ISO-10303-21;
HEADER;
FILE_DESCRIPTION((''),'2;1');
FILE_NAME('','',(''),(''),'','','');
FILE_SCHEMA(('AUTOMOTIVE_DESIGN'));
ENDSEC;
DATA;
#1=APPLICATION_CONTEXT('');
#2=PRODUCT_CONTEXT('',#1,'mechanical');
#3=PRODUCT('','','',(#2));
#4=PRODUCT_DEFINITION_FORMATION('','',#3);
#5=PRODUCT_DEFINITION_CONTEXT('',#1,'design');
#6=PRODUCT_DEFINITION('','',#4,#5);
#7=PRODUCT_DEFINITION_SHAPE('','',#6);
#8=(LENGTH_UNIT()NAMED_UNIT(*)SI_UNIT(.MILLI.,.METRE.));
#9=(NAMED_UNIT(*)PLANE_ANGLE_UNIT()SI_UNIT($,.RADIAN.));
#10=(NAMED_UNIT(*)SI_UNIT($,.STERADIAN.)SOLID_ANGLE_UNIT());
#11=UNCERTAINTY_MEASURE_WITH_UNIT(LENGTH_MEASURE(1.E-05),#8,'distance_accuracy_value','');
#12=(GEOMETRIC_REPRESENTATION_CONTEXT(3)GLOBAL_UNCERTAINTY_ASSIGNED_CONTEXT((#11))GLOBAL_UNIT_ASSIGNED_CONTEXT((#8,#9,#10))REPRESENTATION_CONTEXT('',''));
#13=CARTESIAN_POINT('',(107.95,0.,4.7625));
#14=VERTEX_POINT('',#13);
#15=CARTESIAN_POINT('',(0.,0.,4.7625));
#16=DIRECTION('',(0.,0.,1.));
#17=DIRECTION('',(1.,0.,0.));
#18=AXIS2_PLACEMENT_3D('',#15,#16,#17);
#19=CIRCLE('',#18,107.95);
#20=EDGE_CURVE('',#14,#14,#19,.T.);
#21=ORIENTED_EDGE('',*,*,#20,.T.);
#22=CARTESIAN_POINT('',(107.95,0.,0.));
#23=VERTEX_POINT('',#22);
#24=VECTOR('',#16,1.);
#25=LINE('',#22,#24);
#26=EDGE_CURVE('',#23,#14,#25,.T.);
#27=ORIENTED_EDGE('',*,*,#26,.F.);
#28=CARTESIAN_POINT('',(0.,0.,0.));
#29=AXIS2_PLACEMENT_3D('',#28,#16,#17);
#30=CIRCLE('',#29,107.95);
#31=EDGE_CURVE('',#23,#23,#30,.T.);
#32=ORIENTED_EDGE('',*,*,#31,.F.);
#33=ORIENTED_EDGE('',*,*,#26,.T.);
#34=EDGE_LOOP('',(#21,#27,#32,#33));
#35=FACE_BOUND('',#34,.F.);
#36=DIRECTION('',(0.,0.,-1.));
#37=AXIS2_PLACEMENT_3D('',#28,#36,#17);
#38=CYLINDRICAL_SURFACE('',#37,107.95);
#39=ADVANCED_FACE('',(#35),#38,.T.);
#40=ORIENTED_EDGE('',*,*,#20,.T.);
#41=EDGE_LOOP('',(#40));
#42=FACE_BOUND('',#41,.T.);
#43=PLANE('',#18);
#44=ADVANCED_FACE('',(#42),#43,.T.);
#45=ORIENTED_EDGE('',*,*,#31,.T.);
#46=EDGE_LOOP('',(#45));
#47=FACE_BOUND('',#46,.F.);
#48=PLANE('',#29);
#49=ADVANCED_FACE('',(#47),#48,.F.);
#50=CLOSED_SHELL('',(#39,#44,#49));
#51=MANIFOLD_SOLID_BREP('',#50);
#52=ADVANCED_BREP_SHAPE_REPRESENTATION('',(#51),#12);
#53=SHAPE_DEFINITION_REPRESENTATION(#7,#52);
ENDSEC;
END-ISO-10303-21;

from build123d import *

# Parameters (mm, degrees)
F0_R     = 107.95
F1_DEPTH = 4.7625


# Not quite as in the source:
# - a length typed as a fraction of an inch, garbled in the dataset ("3 / 203.2 mm" for 3/8 in), is restored


with BuildPart() as f1:
    # F0 (on Top) → F1 (new body)
    with BuildSketch(Plane.XY):
        Circle(F0_R)
    extrude(amount=F1_DEPTH)


solid = f1.part
